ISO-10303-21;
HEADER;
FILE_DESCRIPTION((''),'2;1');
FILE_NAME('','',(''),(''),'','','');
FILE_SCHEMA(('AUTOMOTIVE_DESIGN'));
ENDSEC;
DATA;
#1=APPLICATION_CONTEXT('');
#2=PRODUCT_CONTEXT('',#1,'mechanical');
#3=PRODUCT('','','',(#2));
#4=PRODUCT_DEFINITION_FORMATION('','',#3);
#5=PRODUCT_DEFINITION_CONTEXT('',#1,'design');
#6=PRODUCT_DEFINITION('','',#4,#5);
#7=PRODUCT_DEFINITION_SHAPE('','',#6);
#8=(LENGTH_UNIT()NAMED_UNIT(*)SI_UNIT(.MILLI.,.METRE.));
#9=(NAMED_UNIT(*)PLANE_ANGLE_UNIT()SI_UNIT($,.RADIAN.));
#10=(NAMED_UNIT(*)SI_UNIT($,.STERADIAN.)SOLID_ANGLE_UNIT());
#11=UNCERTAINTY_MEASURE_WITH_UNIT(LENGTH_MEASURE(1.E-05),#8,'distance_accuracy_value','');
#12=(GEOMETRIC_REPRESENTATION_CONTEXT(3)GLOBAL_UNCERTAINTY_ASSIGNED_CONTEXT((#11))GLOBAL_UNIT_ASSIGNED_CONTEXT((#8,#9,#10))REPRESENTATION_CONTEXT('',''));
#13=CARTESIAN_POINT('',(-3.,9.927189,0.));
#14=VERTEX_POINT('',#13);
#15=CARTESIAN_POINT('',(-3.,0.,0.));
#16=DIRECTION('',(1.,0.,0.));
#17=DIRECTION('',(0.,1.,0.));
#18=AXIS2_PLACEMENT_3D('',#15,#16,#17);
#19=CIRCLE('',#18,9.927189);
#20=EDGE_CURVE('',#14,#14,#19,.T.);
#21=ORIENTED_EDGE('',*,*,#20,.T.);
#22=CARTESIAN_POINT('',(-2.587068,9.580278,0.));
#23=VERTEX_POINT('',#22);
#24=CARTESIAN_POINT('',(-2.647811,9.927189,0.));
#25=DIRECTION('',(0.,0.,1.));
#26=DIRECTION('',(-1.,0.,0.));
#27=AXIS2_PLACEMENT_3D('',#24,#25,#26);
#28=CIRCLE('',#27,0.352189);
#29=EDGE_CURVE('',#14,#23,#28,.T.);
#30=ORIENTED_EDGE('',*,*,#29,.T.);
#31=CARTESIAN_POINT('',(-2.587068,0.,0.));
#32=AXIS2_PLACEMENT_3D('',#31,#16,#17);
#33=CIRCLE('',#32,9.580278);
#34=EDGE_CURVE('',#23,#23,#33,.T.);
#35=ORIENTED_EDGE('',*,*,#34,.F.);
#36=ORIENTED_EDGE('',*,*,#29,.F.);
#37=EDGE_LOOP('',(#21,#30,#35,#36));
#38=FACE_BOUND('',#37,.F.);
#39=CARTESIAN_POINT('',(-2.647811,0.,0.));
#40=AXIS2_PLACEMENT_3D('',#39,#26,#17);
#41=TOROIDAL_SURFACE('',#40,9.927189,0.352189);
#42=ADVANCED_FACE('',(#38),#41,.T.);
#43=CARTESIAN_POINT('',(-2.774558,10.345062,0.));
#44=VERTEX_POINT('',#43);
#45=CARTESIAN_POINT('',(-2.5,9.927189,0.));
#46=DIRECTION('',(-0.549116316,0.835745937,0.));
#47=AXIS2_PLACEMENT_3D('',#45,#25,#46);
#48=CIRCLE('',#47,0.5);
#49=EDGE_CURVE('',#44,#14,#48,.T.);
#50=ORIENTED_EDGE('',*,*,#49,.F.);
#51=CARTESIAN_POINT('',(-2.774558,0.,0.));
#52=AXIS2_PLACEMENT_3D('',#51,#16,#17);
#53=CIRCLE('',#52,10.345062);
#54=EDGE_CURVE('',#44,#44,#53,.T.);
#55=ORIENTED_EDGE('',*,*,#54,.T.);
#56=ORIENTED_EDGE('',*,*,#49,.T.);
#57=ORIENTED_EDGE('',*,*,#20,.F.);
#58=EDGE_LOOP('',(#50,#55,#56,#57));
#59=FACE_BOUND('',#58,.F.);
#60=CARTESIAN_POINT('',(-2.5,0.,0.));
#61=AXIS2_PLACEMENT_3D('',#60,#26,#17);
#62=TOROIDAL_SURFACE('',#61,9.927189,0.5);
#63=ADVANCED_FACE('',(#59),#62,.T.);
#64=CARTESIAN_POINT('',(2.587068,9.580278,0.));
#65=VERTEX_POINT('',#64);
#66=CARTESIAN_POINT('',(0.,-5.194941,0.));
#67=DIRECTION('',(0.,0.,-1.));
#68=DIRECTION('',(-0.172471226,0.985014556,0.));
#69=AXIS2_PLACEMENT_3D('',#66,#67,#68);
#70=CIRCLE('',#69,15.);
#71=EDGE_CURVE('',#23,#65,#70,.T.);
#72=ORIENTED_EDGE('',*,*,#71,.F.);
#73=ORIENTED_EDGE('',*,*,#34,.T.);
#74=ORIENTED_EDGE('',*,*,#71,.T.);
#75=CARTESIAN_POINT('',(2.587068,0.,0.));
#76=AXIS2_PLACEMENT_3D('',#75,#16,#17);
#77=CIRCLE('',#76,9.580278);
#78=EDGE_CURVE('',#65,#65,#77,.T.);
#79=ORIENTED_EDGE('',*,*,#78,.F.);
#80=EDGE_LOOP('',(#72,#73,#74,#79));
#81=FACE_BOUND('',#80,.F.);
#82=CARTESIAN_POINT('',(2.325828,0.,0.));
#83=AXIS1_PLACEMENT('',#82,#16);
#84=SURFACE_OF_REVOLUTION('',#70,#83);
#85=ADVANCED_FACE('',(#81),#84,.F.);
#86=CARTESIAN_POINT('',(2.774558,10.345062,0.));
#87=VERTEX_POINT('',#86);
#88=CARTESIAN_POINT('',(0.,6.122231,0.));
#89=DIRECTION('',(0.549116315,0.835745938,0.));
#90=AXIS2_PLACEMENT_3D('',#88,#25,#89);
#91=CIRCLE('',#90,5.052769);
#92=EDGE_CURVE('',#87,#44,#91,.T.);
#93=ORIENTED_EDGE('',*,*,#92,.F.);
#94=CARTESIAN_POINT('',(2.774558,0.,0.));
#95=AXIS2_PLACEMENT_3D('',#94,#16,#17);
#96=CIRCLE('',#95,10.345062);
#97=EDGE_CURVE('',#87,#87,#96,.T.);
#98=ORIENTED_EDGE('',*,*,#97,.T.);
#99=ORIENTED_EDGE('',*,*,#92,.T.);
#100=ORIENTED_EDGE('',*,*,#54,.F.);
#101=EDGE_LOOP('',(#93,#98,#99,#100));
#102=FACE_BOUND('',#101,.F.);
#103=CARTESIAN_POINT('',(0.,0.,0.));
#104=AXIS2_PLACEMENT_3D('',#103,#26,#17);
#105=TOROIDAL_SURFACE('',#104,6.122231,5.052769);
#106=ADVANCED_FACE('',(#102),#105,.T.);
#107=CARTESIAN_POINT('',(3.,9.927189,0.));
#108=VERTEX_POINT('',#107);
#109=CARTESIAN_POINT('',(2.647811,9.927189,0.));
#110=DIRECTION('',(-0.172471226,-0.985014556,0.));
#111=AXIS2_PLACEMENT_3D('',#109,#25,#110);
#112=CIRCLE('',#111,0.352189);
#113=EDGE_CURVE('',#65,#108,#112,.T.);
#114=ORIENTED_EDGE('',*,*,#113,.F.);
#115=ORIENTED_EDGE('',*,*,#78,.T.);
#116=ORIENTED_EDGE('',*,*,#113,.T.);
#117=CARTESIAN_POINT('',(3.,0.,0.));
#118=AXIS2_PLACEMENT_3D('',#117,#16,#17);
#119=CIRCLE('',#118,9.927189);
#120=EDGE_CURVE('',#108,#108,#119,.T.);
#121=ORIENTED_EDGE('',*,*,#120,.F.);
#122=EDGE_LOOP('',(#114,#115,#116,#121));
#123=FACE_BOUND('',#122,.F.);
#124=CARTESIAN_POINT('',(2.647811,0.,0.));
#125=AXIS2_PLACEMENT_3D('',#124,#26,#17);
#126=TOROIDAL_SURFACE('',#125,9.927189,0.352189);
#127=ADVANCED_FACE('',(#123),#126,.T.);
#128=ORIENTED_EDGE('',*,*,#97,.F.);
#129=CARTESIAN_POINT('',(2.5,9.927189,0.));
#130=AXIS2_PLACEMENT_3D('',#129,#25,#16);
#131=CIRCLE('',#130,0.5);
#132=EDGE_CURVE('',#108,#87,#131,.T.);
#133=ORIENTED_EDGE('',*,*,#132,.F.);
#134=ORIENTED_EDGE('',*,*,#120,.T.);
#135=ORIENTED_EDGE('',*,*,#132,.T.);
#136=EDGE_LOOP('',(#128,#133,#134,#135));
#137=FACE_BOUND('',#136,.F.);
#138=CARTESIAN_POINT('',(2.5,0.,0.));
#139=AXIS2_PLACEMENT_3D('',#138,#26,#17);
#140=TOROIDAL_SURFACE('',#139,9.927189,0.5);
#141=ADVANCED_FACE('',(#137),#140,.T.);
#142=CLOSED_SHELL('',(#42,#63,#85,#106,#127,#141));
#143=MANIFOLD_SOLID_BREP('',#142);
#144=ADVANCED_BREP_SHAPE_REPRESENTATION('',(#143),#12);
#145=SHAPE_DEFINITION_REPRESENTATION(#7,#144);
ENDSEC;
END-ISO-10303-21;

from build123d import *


# Not quite as in the source:
# - a feature names something its author has since deleted; it is built from what else it names


with BuildPart() as f1:
    # F0 (on Top) → F1 (revolve)
    with BuildSketch(Plane.XY):
        with BuildLine():
            ThreePointArc((-2.7745581576, 10.3450620873), (-2.9400449288, 10.1645927001), (-3, 9.9271891184))
            ThreePointArc((-3, 9.9271891184), (-2.8743548414, 9.6575319112), (-2.5870683925, 9.5802777102))
            ThreePointArc((-2.5870683925, 9.5802777102), (0, 9.8050593655), (2.5870683925, 9.5802777102))
            ThreePointArc((2.5870683925, 9.5802777102), (2.8743548414, 9.6575319112), (3, 9.9271891184))
            ThreePointArc((3, 9.9271891184), (2.9400449288, 10.1645927001), (2.7745581576, 10.3450620873))
            ThreePointArc((2.7745581576, 10.3450620873), (0, 11.175), (-2.7745581576, 10.3450620873))
        make_face()
    revolve(axis=Axis((2.32582842, 0, 0), (1, 0, 0)))


solid = f1.part
